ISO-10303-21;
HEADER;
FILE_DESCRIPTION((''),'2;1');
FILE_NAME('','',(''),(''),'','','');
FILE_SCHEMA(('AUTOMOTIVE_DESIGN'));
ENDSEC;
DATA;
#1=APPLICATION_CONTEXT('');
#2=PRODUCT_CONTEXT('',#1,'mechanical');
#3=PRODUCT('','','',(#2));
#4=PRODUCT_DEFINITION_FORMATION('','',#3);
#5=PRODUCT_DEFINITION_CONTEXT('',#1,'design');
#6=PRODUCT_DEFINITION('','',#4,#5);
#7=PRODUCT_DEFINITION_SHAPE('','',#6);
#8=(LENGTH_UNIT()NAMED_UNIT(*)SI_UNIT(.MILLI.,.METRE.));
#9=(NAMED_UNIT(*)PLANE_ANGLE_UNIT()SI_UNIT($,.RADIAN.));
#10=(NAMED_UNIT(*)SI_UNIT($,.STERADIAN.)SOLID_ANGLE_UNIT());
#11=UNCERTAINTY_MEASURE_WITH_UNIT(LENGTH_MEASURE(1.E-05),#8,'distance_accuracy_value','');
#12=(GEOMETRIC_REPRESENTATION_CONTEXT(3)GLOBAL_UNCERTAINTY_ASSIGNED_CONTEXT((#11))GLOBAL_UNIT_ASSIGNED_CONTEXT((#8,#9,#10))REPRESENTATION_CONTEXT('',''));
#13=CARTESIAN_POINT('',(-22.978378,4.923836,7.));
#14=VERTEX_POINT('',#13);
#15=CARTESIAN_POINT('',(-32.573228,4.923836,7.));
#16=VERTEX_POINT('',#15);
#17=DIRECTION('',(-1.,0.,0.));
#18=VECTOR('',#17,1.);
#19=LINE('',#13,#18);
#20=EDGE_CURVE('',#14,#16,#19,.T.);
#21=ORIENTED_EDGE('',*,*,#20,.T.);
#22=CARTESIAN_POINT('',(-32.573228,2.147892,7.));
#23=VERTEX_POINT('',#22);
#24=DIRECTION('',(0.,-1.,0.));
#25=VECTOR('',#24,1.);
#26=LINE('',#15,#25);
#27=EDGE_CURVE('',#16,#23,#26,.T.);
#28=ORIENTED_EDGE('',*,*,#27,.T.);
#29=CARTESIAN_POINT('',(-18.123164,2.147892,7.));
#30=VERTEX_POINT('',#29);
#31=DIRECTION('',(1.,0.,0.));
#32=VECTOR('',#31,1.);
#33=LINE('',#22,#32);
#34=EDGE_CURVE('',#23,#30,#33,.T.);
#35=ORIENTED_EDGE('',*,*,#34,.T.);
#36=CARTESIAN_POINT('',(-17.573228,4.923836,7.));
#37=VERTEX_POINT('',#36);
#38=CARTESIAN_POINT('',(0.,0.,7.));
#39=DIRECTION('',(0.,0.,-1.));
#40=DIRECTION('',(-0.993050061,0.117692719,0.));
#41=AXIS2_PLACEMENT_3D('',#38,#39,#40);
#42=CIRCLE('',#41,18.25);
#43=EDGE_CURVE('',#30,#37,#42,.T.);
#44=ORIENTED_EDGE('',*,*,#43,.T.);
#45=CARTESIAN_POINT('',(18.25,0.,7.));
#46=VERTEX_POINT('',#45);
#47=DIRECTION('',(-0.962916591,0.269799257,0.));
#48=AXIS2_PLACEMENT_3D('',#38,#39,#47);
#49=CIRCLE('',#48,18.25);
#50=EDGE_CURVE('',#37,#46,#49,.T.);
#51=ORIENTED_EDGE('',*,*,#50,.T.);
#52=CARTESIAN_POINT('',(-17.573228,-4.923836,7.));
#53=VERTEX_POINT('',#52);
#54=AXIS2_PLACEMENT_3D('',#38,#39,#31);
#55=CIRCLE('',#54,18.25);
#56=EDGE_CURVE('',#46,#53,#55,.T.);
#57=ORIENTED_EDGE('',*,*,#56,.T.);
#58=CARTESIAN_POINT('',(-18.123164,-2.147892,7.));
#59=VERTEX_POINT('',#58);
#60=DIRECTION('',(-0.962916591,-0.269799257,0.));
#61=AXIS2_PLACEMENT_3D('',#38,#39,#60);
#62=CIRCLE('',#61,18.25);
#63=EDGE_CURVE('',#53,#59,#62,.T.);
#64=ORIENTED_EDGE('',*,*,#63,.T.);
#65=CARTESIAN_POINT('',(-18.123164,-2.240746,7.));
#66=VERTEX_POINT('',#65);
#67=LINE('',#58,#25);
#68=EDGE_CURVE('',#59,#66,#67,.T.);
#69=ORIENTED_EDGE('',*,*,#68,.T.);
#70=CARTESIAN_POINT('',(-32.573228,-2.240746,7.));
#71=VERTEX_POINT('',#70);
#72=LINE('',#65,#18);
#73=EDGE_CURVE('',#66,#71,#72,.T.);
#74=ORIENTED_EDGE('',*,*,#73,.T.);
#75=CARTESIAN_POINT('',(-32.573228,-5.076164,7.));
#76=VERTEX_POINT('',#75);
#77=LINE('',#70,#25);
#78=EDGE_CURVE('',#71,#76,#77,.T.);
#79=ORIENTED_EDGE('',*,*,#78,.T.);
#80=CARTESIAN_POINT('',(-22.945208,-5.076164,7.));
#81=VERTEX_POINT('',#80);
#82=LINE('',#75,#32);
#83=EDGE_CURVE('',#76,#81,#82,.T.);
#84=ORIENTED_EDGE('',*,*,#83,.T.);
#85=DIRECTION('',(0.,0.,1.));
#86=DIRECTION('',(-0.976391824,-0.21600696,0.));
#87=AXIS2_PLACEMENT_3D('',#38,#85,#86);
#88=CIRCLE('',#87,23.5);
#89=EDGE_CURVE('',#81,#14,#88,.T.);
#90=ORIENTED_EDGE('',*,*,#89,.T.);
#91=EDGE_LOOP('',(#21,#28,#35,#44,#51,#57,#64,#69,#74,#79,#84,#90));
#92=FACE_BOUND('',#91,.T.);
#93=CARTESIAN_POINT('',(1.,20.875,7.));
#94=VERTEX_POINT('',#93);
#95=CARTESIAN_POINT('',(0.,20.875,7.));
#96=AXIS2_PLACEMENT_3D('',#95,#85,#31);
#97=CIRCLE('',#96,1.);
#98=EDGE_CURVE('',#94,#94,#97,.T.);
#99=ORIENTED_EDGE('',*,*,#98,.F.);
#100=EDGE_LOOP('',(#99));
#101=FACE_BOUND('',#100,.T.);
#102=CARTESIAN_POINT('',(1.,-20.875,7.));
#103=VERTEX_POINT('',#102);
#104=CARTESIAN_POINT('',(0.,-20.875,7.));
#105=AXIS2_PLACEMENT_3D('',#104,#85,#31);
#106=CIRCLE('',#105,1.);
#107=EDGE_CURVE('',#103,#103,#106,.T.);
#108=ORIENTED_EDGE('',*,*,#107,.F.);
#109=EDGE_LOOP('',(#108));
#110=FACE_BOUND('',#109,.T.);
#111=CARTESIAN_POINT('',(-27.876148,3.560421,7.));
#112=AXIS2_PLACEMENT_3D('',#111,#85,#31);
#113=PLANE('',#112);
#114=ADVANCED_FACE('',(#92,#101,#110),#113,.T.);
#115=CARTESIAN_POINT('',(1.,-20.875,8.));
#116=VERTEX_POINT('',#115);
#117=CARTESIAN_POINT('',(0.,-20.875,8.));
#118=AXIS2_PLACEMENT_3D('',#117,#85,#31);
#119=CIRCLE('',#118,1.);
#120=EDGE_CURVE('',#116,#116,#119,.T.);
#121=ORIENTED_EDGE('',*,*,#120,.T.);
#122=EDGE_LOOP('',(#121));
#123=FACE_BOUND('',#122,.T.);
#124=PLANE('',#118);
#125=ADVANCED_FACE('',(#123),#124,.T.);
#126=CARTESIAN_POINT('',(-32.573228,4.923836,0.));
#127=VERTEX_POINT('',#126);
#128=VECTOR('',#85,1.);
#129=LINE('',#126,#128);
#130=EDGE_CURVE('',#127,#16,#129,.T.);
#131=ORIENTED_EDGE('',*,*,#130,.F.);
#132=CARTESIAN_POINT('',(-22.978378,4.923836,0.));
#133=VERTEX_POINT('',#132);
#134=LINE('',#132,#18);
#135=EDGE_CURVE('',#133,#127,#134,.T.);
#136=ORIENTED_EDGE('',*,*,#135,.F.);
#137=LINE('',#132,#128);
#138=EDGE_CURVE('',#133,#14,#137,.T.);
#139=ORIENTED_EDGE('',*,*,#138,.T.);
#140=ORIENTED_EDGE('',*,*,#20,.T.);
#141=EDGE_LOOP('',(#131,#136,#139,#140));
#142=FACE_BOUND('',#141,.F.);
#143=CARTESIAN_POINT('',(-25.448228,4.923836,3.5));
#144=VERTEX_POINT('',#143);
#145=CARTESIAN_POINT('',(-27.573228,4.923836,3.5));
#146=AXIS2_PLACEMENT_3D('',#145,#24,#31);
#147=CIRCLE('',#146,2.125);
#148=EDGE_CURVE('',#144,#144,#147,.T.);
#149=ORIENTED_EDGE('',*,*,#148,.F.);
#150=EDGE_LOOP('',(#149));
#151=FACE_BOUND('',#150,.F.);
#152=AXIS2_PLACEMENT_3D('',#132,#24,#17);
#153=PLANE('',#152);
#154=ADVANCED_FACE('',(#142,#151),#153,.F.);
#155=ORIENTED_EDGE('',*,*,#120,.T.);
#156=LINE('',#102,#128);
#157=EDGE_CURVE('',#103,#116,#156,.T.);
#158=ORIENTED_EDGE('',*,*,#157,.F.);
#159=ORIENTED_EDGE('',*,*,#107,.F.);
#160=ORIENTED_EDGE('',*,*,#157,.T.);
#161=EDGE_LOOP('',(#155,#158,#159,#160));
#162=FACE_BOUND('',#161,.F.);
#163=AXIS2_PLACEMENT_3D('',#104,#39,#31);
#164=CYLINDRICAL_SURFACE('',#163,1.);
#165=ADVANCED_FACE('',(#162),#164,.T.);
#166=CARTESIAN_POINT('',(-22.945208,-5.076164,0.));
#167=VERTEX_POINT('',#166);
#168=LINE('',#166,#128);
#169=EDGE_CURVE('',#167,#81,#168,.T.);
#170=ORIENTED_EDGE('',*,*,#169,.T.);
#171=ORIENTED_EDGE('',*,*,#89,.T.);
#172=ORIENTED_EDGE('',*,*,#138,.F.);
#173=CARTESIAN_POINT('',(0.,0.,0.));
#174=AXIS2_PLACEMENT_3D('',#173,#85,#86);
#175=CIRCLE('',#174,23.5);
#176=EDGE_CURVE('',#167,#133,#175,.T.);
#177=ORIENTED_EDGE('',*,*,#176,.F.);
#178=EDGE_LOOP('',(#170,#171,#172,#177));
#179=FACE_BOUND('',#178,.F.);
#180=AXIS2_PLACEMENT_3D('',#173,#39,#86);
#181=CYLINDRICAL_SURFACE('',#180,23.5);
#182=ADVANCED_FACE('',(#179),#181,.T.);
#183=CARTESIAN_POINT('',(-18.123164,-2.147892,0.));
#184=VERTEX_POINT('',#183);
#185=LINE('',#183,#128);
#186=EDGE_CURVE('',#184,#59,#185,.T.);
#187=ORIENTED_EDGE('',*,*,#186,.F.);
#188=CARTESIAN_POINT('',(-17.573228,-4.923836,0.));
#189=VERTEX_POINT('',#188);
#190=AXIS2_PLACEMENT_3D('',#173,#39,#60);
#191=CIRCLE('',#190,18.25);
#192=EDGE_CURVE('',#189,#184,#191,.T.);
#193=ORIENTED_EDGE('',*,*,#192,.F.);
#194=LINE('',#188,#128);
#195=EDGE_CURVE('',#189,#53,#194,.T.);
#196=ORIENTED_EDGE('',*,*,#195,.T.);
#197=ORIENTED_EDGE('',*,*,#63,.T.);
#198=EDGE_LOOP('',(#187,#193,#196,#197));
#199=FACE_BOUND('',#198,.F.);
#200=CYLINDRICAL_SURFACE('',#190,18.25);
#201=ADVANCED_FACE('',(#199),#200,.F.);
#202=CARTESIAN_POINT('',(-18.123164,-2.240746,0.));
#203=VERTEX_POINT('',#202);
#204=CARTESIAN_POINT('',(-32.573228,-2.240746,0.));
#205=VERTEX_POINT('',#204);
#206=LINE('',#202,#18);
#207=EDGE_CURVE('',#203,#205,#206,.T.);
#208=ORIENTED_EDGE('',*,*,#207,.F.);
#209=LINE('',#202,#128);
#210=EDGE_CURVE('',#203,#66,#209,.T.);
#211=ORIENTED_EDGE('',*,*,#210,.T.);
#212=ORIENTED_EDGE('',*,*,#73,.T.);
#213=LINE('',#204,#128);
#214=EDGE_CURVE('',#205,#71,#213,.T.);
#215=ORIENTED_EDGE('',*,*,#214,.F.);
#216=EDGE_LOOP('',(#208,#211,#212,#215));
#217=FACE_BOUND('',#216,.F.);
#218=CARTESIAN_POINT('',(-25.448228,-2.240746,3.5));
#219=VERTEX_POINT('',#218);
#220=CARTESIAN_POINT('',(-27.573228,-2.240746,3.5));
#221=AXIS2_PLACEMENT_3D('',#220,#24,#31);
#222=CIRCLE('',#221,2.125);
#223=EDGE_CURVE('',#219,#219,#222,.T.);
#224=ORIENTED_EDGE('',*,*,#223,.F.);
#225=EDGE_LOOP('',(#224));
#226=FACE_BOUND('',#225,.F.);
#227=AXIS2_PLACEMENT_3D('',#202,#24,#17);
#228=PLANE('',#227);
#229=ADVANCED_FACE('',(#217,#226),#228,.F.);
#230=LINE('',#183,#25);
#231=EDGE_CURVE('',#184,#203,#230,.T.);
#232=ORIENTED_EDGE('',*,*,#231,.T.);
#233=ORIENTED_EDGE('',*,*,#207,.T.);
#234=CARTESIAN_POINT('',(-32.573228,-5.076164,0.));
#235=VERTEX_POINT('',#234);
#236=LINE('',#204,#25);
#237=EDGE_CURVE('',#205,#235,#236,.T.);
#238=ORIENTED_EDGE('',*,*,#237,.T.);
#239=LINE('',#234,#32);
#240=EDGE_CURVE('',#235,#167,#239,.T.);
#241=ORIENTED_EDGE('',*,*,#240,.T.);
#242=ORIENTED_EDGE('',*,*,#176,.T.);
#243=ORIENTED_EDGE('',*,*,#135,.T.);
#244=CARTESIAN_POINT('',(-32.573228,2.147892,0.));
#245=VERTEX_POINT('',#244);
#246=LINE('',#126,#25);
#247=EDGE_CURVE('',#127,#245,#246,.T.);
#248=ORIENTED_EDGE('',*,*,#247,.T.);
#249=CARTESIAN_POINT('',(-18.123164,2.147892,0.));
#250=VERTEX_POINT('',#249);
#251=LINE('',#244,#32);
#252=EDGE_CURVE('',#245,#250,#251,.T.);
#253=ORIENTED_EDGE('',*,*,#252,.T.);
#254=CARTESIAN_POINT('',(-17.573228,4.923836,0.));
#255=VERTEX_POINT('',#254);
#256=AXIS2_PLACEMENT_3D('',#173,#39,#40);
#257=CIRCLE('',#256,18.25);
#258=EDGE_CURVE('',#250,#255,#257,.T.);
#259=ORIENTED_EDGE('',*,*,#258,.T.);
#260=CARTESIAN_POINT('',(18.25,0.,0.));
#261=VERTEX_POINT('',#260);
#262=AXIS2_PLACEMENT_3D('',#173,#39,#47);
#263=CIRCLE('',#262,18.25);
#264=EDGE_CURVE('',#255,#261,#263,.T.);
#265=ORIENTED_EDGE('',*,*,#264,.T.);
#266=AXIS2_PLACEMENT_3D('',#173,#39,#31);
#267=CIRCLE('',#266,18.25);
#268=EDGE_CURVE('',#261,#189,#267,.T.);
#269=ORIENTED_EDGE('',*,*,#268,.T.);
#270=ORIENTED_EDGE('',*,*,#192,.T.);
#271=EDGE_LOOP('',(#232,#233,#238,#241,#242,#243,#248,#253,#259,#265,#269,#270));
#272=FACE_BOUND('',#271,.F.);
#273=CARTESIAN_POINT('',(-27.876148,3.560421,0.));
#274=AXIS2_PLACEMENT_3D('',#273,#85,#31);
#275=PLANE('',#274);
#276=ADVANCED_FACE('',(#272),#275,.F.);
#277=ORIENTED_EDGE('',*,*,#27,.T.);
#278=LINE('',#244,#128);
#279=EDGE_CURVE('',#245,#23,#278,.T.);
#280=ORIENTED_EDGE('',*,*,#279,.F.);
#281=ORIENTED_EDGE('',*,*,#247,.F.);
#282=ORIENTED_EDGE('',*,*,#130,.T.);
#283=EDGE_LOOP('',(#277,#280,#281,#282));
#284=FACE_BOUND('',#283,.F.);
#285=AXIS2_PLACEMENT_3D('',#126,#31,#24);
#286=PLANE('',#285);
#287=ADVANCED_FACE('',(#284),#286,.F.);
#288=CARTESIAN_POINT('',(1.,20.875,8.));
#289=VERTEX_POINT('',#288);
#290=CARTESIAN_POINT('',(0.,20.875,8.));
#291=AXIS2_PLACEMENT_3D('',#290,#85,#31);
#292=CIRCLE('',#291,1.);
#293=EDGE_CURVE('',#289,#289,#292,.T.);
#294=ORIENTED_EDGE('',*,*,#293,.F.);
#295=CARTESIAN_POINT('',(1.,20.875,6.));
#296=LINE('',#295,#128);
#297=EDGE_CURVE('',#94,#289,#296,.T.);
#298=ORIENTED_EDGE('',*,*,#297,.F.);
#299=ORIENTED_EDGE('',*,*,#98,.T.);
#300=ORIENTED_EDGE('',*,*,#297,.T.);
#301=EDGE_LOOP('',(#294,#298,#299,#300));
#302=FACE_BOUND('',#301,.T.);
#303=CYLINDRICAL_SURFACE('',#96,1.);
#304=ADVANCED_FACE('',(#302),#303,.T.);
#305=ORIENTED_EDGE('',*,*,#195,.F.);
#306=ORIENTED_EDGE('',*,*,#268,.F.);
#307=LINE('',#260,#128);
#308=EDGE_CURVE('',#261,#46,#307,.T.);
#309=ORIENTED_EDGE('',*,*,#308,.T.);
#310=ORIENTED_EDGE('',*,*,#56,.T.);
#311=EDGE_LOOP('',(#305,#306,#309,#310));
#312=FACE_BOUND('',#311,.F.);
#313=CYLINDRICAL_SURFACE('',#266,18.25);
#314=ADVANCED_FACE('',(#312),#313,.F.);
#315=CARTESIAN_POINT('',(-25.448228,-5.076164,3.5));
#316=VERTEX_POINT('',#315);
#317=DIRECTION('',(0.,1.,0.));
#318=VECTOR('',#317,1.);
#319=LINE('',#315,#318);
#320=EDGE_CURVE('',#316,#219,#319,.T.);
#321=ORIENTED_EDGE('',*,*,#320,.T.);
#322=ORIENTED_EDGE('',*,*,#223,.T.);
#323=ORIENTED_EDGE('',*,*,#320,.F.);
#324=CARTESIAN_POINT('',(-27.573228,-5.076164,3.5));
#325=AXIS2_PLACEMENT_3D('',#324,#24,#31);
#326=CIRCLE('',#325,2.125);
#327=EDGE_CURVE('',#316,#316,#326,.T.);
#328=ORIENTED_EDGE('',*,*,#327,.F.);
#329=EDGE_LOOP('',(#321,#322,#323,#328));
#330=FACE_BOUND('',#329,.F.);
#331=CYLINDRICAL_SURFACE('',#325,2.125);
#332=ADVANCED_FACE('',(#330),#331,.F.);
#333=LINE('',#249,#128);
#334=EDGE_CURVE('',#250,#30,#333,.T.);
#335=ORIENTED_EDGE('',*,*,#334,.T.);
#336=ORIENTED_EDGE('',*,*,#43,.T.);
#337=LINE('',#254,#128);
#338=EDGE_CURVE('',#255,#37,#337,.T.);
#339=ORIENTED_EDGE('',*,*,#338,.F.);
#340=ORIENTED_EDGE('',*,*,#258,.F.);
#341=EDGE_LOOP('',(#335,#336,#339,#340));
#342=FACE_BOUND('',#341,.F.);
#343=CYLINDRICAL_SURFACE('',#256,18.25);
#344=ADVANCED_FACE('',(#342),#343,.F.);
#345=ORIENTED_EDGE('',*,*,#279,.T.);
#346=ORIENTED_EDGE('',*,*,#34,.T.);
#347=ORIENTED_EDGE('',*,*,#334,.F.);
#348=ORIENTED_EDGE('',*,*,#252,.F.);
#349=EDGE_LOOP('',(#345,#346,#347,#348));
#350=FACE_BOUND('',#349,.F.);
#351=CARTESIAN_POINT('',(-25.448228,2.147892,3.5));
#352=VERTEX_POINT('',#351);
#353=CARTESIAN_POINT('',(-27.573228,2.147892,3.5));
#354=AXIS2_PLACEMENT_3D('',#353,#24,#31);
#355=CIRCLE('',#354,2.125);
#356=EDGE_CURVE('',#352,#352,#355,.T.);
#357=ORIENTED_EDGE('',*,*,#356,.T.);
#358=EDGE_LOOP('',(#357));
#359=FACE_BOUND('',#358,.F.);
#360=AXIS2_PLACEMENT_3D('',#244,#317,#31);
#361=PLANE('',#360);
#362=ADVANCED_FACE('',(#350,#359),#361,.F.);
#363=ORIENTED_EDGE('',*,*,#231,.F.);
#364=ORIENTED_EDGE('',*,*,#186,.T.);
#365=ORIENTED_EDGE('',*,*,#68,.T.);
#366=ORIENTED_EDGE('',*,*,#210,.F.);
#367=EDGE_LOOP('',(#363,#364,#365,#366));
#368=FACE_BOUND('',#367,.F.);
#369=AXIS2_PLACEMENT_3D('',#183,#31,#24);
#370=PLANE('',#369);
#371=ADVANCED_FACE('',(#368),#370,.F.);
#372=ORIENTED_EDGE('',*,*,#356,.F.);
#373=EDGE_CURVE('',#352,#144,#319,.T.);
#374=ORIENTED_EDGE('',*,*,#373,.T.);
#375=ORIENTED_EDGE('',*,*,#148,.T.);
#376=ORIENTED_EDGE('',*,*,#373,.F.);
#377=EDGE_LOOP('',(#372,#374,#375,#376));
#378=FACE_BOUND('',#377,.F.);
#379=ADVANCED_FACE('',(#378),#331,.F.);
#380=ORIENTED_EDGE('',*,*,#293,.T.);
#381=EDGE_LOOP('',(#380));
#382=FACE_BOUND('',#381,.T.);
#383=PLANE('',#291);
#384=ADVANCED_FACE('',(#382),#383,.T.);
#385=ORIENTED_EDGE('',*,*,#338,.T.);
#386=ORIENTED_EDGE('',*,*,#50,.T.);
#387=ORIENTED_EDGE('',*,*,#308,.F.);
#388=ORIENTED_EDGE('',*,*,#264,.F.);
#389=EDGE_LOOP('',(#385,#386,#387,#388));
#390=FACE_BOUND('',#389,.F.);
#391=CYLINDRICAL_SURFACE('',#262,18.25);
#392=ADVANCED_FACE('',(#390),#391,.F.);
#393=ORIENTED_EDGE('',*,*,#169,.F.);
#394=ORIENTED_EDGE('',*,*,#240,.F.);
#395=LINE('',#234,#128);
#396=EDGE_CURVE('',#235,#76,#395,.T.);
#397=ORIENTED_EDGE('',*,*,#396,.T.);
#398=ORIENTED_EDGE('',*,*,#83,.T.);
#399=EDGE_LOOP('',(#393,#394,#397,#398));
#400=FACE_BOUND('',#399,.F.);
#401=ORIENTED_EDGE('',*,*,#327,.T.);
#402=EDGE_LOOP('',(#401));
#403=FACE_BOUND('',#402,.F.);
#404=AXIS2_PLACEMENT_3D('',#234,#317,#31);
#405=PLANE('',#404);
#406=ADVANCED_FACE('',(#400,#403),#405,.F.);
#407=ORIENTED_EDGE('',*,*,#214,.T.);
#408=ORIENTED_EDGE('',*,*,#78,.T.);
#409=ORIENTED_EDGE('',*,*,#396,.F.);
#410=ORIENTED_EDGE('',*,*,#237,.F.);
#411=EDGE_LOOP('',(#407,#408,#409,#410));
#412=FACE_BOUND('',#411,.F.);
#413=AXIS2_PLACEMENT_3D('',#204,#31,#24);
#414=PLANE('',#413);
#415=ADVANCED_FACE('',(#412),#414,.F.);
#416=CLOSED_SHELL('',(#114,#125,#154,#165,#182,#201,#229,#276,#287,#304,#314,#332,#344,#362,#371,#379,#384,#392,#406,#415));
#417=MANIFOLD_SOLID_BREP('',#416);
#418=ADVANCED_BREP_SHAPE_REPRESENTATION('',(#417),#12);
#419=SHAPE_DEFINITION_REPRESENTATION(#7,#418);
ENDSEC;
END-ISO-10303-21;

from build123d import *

# Parameters (mm, degrees)
F1_DEPTH = 7
F2_R     = 2.125
F3_DEPTH = 10
F4_R     = 1
F5_DEPTH = 1


# Not quite as in the source:
# - a feature names something its author has since deleted; it is built from what else it names


with BuildPart() as f1:
    # F0 (on Top) → F1 (new body)
    with BuildSketch(Plane.XY):
        with BuildLine():
            ThreePointArc((-23.401635828, 2.1478921234), (-23.2315061267, 3.5421918479), (-22.9783775489, 4.9238364331))
            Line((-22.9783775489, 4.9238364331), (-32.5732277849, 4.9238364331))
            Line((-32.5732277849, 4.9238364331), (-32.5732277849, 2.1478921234))
            Line((-32.5732277849, 2.1478921234), (-23.401635828, 2.1478921234))
        make_face()
        with BuildLine():
            Line((-32.5732277849, -5.0761635669), (-22.9452078535, -5.0761635669))
            ThreePointArc((-22.9452078535, -5.0761635669), (-23.2124017724, -3.6652972535), (-23.3929275249, -2.2407458164))
            Line((-23.3929275249, -2.2407458164), (-32.5732277849, -2.2407458164))
            Line((-32.5732277849, -2.2407458164), (-32.5732277849, -5.0761635669))
        make_face()
        with BuildLine():
            ThreePointArc((-22.9452078535, -5.0761635669), (2.55319559, -23.3608902287), (23.5, 0))
            ThreePointArc((23.5, 0), (2.4756946097, 23.3692305436), (-22.9783775489, 4.9238364331))
            Line((-22.9783775489, 4.9238364331), (-17.5732277849, 4.9238364331))
            ThreePointArc((-17.5732277849, 4.9238364331), (2.4850646798, 18.080015308), (18.25, 0))
            ThreePointArc((18.25, 0), (2.4850646798, -18.080015308), (-17.5732277849, -4.9238364331))
            Line((-17.5732277849, -4.9238364331), (-17.5732277849, -5.0761635669))
            Line((-17.5732277849, -5.0761635669), (-22.9452078535, -5.0761635669))
        make_face()
        with BuildLine():
            Line((-17.5732277849, 4.9238364331), (-22.9783775489, 4.9238364331))
            ThreePointArc((-22.9783775489, 4.9238364331), (-23.2315061267, 3.5421918479), (-23.401635828, 2.1478921234))
            Line((-23.401635828, 2.1478921234), (-18.1231636153, 2.1478921234))
            ThreePointArc((-18.1231636153, 2.1478921234), (-17.9020824613, 3.5465396584), (-17.5732277849, 4.9238364331))
        make_face()
        with BuildLine():
            ThreePointArc((-23.3929275249, -2.2407458164), (-23.2124017724, -3.6652972535), (-22.9452078535, -5.0761635669))
            Line((-22.9452078535, -5.0761635669), (-17.5732277849, -5.0761635669))
            Line((-17.5732277849, -5.0761635669), (-17.5732277849, -4.9238364331))
            ThreePointArc((-17.5732277849, -4.9238364331), (-17.9020824613, -3.5465396584), (-18.1231636153, -2.1478921234))
            Line((-18.1231636153, -2.1478921234), (-18.1231636153, -2.2407458164))
            Line((-18.1231636153, -2.2407458164), (-23.3929275249, -2.2407458164))
        make_face()
    extrude(amount=F1_DEPTH)

    # F2 (on face) → F3 (cut)
    with BuildSketch(Plane.XZ.offset(5.0761635669)):
        with Locations((-27.5732277849, 3.5)):
            Circle(F2_R)
    extrude(amount=-F3_DEPTH, mode=Mode.SUBTRACT)

    # F4 (on face) → F5 (join, symmetric)
    with BuildSketch(Plane.XY.offset(7)):
        with Locations((0, -20.875)):
            Circle(F4_R)
        with Locations((0, 20.875)):
            Circle(F4_R)
    extrude(amount=F5_DEPTH, both=True)


solid = f1.part
